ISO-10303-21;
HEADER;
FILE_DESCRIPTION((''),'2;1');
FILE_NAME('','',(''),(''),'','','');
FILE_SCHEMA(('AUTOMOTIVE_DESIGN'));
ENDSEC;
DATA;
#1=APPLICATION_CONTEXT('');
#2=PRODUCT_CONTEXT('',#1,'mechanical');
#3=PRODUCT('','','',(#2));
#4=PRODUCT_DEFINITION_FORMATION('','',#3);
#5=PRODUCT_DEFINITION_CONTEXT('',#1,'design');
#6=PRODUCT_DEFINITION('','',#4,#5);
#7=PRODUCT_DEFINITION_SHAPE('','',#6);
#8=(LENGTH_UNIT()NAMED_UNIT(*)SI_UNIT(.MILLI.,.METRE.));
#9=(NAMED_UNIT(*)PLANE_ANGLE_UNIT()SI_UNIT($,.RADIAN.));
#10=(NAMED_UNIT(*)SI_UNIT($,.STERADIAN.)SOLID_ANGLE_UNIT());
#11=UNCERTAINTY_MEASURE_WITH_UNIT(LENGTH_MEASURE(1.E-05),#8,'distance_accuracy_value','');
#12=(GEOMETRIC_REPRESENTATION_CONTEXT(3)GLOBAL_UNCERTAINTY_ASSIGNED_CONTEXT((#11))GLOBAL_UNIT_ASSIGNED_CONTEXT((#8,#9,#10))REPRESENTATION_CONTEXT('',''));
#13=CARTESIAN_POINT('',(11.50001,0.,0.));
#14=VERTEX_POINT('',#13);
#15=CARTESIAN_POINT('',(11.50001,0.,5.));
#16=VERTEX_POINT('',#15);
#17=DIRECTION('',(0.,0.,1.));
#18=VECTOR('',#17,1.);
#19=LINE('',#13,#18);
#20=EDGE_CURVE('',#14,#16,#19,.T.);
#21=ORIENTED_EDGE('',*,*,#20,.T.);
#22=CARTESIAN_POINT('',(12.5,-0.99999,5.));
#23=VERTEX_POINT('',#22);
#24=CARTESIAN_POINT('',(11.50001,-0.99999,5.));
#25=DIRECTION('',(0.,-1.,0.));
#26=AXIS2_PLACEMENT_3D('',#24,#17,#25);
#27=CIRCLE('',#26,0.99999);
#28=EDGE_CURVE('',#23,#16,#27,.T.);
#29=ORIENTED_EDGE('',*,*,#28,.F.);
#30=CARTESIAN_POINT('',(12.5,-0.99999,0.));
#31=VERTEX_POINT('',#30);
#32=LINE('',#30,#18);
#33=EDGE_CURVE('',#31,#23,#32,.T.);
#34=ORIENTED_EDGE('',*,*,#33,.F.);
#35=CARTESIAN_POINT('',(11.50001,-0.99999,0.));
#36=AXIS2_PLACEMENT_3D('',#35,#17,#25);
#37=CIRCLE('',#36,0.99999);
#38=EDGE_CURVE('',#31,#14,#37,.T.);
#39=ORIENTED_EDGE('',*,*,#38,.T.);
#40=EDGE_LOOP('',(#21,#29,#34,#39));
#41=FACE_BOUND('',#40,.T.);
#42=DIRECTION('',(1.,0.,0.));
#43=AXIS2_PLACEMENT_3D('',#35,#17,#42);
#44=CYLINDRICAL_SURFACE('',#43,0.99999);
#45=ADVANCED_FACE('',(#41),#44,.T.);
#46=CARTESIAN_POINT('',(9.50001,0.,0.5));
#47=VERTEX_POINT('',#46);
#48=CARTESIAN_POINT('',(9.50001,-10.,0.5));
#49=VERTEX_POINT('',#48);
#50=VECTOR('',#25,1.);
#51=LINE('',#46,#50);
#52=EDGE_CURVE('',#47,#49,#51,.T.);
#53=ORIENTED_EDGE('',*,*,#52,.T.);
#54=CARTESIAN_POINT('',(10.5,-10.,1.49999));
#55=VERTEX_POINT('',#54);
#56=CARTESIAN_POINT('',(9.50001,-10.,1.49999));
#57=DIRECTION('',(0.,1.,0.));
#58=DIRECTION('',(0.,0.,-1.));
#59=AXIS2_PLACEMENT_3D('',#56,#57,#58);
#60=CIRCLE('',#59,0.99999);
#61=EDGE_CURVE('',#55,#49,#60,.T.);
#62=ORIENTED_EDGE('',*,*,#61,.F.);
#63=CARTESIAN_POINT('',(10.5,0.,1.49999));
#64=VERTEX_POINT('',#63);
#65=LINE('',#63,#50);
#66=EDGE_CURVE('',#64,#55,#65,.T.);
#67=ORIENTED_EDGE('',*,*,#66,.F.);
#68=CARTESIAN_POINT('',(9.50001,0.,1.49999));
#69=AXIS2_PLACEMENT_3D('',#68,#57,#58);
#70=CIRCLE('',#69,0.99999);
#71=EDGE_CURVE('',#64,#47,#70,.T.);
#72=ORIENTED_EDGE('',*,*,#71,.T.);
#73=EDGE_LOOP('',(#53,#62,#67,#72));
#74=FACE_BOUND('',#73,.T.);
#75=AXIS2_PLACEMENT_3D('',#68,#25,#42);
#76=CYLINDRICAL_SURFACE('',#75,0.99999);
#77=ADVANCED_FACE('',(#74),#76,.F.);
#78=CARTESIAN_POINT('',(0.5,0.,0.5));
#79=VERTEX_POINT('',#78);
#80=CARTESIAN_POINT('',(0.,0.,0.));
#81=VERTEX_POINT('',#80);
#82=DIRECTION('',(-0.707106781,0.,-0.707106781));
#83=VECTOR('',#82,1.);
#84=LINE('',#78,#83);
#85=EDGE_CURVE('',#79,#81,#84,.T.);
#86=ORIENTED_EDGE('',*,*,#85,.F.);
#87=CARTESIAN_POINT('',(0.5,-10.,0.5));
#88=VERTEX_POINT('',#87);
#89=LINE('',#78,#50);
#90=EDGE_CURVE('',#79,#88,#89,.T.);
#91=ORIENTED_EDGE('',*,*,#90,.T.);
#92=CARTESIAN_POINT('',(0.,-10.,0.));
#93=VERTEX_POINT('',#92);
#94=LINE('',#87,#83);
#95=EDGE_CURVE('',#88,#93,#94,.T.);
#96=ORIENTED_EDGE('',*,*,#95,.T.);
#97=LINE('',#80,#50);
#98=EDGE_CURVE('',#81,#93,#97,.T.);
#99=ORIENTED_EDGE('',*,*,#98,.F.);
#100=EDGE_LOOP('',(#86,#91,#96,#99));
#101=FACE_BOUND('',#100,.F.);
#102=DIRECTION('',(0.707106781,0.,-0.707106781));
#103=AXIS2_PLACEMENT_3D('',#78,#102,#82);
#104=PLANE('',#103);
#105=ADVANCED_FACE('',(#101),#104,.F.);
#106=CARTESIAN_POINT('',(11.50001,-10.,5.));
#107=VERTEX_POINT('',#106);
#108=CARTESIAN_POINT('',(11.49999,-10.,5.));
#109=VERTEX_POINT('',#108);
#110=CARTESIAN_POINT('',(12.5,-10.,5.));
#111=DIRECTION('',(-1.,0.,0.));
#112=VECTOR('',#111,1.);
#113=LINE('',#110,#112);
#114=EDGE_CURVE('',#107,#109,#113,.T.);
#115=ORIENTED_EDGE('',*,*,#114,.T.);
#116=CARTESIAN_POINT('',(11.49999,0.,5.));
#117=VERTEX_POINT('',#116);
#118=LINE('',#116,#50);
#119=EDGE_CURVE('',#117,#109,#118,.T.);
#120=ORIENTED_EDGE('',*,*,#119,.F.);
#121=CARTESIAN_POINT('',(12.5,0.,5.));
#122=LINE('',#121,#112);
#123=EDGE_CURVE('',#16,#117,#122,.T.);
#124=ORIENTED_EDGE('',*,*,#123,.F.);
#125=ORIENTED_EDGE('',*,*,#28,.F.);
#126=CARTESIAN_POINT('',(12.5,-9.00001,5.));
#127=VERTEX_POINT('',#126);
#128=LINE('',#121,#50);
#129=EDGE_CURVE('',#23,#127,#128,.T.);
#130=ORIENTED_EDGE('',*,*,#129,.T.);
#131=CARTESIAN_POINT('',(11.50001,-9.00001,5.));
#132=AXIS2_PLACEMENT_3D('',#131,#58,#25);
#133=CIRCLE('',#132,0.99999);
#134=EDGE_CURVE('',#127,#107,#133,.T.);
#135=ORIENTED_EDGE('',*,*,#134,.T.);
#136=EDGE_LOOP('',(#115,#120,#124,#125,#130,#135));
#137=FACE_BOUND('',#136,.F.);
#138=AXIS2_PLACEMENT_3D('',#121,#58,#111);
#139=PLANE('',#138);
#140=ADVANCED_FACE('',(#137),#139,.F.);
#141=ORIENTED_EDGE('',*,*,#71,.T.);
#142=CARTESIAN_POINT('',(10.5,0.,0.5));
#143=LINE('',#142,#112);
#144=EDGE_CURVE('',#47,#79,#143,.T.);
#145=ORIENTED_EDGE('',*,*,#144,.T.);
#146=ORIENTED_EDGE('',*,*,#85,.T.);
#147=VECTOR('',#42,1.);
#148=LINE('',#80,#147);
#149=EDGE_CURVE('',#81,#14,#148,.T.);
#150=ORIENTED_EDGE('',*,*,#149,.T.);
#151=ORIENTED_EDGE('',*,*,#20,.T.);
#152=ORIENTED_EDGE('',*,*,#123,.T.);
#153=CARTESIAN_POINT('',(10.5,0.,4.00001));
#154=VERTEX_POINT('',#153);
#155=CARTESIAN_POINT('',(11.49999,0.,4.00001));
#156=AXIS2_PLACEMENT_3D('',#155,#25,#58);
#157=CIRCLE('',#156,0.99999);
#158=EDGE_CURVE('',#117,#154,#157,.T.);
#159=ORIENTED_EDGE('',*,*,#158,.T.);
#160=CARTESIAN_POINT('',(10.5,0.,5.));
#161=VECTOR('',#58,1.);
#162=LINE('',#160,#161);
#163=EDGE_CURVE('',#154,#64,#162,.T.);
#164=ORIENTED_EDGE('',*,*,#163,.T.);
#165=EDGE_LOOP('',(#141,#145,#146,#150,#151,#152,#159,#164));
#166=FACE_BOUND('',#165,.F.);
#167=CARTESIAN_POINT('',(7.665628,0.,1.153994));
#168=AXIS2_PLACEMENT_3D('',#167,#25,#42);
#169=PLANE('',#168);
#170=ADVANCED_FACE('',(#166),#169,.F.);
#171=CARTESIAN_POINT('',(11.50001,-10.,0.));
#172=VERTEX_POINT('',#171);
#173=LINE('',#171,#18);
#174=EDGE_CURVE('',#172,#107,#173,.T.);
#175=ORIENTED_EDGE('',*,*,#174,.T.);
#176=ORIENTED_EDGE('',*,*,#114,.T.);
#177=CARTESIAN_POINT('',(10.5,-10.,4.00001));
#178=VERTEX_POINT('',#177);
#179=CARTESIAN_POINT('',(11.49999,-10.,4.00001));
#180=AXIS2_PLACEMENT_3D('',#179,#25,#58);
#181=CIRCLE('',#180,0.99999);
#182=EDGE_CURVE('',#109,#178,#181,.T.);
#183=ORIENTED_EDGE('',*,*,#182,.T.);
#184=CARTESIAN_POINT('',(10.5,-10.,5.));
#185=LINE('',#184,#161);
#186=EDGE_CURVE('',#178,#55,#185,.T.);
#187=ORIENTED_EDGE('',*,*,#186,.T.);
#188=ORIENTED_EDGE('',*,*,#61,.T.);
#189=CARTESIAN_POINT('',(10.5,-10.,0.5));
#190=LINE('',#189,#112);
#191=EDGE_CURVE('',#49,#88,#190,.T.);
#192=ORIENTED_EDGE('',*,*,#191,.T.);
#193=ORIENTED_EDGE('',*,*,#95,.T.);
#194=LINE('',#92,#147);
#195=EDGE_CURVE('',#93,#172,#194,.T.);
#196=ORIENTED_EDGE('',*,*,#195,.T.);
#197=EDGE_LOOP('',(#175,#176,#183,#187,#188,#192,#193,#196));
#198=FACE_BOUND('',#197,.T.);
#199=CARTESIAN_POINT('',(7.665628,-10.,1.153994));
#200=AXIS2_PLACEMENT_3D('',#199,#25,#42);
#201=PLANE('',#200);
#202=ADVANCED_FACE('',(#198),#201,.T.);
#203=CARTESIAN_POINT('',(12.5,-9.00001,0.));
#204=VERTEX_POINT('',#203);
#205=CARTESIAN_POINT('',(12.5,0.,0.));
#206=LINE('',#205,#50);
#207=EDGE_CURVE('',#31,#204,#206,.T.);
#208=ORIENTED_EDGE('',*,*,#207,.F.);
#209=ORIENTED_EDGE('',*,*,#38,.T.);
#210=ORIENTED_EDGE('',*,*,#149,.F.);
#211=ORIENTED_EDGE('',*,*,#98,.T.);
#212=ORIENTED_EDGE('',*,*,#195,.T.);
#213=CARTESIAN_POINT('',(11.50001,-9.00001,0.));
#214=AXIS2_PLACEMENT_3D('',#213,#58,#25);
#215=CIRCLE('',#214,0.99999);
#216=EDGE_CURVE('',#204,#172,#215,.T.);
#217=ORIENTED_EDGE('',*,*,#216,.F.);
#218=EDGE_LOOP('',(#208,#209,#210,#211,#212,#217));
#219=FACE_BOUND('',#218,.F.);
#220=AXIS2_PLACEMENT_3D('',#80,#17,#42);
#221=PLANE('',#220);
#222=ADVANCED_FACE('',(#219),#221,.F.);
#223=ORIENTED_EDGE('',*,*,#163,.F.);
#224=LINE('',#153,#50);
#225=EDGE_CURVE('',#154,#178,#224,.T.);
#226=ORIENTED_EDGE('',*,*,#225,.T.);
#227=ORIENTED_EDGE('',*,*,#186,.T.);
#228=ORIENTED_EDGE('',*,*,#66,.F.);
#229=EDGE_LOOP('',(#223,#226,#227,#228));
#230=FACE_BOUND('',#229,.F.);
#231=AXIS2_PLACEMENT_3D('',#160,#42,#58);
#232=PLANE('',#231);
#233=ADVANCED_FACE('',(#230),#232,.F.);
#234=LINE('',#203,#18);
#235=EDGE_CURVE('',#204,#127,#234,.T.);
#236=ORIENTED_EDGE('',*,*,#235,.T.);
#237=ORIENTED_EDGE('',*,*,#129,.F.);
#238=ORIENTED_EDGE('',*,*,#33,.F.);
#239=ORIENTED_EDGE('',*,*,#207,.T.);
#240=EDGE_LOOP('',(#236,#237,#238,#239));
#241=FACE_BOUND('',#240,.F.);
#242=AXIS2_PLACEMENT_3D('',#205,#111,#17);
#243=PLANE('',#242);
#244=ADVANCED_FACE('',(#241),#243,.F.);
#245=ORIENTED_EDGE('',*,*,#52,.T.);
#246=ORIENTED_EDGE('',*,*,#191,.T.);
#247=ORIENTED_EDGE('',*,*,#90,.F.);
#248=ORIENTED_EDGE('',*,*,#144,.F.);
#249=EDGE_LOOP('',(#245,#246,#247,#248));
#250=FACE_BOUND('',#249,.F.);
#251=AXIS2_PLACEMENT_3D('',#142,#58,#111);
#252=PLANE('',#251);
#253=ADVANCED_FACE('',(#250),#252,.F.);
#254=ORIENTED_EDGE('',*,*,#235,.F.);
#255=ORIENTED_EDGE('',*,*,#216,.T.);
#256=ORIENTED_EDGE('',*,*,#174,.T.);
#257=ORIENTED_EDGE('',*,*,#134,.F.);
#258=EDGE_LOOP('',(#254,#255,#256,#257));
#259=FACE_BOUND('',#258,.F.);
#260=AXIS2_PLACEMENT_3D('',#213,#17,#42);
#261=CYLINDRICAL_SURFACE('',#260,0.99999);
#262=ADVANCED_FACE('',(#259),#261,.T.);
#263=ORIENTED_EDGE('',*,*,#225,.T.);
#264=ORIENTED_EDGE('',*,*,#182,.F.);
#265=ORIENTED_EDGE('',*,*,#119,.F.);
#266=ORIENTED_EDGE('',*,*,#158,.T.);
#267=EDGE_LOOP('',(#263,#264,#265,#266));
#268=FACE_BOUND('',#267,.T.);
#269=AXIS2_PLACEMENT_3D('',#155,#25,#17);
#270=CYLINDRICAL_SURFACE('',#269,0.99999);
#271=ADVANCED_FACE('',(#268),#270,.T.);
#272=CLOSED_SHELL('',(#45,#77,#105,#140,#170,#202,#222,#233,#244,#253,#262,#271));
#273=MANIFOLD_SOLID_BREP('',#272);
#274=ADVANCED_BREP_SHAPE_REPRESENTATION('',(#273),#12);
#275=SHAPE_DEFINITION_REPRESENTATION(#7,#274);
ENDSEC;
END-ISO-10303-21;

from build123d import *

# Parameters (mm, degrees)
F1_DEPTH = 10
F2_R     = 0.99999


# Not quite as in the source:
# - a fillet or chamfer is up to 0.001 mm smaller than in the source, because OpenCascade refuses the exact size


with BuildPart() as f1:
    # F0 (on Front) → F1 (new body)
    with BuildSketch(Plane.XZ):
        Polygon((0.5, 0.5), (0, 0), (12.5, 0), (12.5, 5), (10.5, 5), (10.5, 0.5), align=None)
    extrude(amount=F1_DEPTH)

    # F2 (radius 1 in the source; OpenCascade refuses exactly that, so slightly less here)
    f2_edges = [f1.edges().sort_by_distance(p)[0] for p in [
        (10.5, -5, 0.5),
        (12.5, -10, 2.5),
        (12.5, 0, 2.5),
        (10.5, -5, 5),
    ]]
    fillet(f2_edges, radius=F2_R)


solid = f1.part
